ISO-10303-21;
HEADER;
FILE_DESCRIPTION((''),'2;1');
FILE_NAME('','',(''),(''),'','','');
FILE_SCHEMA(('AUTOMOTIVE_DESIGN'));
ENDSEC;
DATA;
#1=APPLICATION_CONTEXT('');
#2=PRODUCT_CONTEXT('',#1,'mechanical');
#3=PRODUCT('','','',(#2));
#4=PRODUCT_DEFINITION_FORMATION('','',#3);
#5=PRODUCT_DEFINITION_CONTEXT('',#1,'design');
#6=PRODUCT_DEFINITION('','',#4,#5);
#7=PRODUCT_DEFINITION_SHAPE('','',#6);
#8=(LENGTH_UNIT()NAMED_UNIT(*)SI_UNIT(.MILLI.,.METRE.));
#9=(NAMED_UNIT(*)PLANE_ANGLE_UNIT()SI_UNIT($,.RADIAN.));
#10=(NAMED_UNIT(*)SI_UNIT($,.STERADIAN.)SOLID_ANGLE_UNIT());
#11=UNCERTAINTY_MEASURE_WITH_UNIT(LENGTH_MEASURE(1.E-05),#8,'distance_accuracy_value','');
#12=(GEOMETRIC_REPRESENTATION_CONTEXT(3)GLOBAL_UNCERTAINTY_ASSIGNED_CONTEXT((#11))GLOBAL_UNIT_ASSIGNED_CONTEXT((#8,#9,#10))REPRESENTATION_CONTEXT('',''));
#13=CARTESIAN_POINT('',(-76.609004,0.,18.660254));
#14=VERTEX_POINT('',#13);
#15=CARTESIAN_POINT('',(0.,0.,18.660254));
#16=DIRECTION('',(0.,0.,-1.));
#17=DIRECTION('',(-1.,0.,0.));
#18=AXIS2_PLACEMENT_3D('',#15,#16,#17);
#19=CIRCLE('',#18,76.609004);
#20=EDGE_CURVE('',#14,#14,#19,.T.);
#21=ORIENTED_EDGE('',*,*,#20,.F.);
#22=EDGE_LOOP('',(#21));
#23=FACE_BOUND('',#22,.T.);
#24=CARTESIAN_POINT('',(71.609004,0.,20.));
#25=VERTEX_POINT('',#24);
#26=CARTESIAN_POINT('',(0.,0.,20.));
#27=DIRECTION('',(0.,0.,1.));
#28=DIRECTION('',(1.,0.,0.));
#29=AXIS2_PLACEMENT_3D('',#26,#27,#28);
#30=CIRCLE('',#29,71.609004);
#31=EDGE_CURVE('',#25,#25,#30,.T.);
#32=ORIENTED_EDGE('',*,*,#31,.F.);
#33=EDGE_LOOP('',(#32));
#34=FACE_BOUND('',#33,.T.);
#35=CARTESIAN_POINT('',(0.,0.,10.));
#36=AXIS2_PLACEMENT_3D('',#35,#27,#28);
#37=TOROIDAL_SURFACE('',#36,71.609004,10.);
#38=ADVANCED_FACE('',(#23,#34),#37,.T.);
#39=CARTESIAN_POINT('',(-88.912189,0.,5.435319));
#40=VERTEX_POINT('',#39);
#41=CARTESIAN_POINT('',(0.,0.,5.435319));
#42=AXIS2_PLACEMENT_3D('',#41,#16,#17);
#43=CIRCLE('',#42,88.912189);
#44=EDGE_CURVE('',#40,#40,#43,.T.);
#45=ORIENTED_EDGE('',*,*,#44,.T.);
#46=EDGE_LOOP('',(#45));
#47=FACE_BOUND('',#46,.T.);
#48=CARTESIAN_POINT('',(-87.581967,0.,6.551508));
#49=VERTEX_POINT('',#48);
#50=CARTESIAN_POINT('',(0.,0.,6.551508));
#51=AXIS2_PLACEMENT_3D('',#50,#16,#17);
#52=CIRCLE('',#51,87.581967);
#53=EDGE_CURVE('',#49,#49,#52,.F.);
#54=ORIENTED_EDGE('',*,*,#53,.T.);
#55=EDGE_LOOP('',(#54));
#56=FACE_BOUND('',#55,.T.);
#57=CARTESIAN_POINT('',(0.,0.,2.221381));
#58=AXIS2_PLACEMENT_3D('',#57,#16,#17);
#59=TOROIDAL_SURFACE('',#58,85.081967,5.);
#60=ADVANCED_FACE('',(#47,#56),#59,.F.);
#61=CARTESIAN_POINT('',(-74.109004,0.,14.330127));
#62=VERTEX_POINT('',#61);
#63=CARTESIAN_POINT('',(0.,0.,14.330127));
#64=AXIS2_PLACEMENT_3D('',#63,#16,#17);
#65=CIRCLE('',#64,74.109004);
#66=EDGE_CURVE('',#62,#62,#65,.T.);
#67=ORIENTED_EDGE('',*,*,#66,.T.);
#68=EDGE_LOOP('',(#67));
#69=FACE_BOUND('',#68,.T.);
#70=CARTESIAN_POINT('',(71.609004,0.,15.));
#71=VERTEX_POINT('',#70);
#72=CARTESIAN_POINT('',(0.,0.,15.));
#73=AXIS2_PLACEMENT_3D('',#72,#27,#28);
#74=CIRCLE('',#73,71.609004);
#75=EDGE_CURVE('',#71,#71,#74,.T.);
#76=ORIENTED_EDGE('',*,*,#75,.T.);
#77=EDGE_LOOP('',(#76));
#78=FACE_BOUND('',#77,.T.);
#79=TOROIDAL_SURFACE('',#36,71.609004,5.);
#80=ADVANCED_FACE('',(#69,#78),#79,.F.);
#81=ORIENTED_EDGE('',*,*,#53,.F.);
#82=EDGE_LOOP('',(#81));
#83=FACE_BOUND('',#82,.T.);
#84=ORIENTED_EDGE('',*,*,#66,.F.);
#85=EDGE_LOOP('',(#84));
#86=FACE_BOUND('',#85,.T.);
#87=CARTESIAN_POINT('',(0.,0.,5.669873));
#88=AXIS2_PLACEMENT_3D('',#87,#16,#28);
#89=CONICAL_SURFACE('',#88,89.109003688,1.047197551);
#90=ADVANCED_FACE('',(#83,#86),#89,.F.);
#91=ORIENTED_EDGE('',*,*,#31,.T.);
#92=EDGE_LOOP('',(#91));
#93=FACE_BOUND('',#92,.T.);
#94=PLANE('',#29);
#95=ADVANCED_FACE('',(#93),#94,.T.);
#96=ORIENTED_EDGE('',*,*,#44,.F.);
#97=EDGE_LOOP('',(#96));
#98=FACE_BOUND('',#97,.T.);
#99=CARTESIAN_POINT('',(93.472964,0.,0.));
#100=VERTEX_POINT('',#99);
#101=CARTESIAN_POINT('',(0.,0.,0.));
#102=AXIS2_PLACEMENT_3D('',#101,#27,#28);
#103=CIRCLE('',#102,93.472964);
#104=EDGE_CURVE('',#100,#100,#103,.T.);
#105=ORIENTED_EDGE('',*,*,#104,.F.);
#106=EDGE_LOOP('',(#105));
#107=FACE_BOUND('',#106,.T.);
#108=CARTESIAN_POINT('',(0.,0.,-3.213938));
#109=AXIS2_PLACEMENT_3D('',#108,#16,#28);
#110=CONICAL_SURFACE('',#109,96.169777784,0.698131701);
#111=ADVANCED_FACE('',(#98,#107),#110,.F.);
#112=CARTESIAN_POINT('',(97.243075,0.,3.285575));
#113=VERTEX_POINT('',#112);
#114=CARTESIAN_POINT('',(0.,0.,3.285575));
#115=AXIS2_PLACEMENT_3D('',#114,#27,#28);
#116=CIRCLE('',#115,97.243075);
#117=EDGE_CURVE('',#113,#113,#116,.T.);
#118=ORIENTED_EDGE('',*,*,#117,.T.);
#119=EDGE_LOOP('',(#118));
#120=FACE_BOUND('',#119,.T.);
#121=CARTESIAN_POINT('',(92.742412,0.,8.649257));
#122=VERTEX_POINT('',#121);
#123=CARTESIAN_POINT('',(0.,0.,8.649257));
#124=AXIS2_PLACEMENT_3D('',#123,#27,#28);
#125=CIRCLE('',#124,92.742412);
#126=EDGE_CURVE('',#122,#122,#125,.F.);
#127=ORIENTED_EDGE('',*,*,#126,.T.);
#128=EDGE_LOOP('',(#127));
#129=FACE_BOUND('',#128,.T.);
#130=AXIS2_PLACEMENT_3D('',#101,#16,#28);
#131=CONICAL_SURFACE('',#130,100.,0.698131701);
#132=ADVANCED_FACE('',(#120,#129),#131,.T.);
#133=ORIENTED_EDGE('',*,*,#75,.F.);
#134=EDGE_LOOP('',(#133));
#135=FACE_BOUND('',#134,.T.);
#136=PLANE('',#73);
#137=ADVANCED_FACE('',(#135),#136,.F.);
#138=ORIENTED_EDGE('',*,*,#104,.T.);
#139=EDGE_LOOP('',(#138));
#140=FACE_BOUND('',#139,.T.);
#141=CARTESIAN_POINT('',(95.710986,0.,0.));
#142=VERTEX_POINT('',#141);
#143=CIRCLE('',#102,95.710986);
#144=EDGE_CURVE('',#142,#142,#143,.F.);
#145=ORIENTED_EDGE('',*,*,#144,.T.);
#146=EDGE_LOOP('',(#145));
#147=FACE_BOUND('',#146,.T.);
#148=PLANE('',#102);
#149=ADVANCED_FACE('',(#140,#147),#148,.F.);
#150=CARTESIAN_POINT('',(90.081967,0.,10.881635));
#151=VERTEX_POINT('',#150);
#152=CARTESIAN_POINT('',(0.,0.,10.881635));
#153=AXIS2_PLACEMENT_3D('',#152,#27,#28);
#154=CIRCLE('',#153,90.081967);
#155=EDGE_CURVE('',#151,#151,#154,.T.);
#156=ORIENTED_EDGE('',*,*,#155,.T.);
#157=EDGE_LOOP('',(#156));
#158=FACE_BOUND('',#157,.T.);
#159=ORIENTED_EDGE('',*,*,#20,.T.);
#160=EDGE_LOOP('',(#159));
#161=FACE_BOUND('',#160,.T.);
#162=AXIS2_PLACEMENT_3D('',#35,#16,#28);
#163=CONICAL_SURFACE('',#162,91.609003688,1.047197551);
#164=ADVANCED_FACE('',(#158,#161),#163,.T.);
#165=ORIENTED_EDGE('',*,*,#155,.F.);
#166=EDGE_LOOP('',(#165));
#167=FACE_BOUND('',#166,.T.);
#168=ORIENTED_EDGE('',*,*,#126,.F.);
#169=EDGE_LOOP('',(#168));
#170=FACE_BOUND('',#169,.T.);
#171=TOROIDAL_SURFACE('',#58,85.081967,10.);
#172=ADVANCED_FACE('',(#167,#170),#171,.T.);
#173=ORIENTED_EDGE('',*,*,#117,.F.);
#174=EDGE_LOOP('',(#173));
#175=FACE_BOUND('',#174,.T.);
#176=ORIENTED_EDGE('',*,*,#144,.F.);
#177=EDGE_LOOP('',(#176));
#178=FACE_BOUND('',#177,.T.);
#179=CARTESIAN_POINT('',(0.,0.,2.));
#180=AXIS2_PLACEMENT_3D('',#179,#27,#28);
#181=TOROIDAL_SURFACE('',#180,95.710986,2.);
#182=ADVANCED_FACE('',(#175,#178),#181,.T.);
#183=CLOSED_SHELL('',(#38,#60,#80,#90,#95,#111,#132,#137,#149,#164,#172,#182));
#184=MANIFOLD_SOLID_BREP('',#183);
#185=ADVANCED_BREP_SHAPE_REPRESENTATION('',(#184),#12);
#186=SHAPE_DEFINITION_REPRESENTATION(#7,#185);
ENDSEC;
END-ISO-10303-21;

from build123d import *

# Parameters (mm, degrees)
SKETCH1_R           = 100
BOSS_EXTRUDE1_DEPTH = 10
BOSS_EXTRUDE1_TAPER = 40
SKETCH2_R           = 91.609003688
BOSS_EXTRUDE2_DEPTH = 10
BOSS_EXTRUDE2_TAPER = 60
FILLET1_R           = 10
FILLET2_R           = 2


# Read off the part's stored shape, not the designer's step: Shell1
with BuildPart() as part:
    # Sketch1 → Boss-Extrude1 (new body)
    with BuildSketch(Plane.XY):
        Circle(SKETCH1_R)
    extrude(amount=BOSS_EXTRUDE1_DEPTH, taper=BOSS_EXTRUDE1_TAPER)

    # Sketch2 → Boss-Extrude2 (add)
    with BuildSketch(Plane.XY.offset(10)):
        Circle(SKETCH2_R)
    extrude(amount=BOSS_EXTRUDE2_DEPTH, taper=BOSS_EXTRUDE2_TAPER)

    # Fillet1
    fillet1_edges = [part.edges().sort_by_distance(p)[0] for p in [
        (-91.609003688, 0, 10),
        (-74.288495613, 0, 20),
    ]]
    fillet(fillet1_edges, radius=FILLET1_R)

    # Fillet2
    fillet2_edges = [part.edges().sort_by_distance(p)[0] for p in [
        (-100, 0, 0),
    ]]
    fillet(fillet2_edges, radius=FILLET2_R)

    # Shell1 outline → Shell1 (revolve, cut)
    with BuildSketch(Plane.XZ):
        with BuildLine():
            Line((93.472963553, 0), (88.912189457, 5.435318914))
            ThreePointArc((88.912189457, 5.435318914), (88.29590529, 6.051603081), (87.581967242, 6.551507885))
            Line((87.581967242, 6.551507885), (74.109003688, 14.330127019))
            ThreePointArc((74.109003688, 14.330127019), (72.903098913, 14.829629131), (71.609003688, 15))
            Line((71.609003688, 15), (0, 15))
            Line((0, 15), (0, 0))
            Line((0, 0), (93.472963553, 0))
        make_face()
    revolve(axis=Axis((0, 0, 0), (0, 0, 1)), mode=Mode.SUBTRACT)


solid = part.part
